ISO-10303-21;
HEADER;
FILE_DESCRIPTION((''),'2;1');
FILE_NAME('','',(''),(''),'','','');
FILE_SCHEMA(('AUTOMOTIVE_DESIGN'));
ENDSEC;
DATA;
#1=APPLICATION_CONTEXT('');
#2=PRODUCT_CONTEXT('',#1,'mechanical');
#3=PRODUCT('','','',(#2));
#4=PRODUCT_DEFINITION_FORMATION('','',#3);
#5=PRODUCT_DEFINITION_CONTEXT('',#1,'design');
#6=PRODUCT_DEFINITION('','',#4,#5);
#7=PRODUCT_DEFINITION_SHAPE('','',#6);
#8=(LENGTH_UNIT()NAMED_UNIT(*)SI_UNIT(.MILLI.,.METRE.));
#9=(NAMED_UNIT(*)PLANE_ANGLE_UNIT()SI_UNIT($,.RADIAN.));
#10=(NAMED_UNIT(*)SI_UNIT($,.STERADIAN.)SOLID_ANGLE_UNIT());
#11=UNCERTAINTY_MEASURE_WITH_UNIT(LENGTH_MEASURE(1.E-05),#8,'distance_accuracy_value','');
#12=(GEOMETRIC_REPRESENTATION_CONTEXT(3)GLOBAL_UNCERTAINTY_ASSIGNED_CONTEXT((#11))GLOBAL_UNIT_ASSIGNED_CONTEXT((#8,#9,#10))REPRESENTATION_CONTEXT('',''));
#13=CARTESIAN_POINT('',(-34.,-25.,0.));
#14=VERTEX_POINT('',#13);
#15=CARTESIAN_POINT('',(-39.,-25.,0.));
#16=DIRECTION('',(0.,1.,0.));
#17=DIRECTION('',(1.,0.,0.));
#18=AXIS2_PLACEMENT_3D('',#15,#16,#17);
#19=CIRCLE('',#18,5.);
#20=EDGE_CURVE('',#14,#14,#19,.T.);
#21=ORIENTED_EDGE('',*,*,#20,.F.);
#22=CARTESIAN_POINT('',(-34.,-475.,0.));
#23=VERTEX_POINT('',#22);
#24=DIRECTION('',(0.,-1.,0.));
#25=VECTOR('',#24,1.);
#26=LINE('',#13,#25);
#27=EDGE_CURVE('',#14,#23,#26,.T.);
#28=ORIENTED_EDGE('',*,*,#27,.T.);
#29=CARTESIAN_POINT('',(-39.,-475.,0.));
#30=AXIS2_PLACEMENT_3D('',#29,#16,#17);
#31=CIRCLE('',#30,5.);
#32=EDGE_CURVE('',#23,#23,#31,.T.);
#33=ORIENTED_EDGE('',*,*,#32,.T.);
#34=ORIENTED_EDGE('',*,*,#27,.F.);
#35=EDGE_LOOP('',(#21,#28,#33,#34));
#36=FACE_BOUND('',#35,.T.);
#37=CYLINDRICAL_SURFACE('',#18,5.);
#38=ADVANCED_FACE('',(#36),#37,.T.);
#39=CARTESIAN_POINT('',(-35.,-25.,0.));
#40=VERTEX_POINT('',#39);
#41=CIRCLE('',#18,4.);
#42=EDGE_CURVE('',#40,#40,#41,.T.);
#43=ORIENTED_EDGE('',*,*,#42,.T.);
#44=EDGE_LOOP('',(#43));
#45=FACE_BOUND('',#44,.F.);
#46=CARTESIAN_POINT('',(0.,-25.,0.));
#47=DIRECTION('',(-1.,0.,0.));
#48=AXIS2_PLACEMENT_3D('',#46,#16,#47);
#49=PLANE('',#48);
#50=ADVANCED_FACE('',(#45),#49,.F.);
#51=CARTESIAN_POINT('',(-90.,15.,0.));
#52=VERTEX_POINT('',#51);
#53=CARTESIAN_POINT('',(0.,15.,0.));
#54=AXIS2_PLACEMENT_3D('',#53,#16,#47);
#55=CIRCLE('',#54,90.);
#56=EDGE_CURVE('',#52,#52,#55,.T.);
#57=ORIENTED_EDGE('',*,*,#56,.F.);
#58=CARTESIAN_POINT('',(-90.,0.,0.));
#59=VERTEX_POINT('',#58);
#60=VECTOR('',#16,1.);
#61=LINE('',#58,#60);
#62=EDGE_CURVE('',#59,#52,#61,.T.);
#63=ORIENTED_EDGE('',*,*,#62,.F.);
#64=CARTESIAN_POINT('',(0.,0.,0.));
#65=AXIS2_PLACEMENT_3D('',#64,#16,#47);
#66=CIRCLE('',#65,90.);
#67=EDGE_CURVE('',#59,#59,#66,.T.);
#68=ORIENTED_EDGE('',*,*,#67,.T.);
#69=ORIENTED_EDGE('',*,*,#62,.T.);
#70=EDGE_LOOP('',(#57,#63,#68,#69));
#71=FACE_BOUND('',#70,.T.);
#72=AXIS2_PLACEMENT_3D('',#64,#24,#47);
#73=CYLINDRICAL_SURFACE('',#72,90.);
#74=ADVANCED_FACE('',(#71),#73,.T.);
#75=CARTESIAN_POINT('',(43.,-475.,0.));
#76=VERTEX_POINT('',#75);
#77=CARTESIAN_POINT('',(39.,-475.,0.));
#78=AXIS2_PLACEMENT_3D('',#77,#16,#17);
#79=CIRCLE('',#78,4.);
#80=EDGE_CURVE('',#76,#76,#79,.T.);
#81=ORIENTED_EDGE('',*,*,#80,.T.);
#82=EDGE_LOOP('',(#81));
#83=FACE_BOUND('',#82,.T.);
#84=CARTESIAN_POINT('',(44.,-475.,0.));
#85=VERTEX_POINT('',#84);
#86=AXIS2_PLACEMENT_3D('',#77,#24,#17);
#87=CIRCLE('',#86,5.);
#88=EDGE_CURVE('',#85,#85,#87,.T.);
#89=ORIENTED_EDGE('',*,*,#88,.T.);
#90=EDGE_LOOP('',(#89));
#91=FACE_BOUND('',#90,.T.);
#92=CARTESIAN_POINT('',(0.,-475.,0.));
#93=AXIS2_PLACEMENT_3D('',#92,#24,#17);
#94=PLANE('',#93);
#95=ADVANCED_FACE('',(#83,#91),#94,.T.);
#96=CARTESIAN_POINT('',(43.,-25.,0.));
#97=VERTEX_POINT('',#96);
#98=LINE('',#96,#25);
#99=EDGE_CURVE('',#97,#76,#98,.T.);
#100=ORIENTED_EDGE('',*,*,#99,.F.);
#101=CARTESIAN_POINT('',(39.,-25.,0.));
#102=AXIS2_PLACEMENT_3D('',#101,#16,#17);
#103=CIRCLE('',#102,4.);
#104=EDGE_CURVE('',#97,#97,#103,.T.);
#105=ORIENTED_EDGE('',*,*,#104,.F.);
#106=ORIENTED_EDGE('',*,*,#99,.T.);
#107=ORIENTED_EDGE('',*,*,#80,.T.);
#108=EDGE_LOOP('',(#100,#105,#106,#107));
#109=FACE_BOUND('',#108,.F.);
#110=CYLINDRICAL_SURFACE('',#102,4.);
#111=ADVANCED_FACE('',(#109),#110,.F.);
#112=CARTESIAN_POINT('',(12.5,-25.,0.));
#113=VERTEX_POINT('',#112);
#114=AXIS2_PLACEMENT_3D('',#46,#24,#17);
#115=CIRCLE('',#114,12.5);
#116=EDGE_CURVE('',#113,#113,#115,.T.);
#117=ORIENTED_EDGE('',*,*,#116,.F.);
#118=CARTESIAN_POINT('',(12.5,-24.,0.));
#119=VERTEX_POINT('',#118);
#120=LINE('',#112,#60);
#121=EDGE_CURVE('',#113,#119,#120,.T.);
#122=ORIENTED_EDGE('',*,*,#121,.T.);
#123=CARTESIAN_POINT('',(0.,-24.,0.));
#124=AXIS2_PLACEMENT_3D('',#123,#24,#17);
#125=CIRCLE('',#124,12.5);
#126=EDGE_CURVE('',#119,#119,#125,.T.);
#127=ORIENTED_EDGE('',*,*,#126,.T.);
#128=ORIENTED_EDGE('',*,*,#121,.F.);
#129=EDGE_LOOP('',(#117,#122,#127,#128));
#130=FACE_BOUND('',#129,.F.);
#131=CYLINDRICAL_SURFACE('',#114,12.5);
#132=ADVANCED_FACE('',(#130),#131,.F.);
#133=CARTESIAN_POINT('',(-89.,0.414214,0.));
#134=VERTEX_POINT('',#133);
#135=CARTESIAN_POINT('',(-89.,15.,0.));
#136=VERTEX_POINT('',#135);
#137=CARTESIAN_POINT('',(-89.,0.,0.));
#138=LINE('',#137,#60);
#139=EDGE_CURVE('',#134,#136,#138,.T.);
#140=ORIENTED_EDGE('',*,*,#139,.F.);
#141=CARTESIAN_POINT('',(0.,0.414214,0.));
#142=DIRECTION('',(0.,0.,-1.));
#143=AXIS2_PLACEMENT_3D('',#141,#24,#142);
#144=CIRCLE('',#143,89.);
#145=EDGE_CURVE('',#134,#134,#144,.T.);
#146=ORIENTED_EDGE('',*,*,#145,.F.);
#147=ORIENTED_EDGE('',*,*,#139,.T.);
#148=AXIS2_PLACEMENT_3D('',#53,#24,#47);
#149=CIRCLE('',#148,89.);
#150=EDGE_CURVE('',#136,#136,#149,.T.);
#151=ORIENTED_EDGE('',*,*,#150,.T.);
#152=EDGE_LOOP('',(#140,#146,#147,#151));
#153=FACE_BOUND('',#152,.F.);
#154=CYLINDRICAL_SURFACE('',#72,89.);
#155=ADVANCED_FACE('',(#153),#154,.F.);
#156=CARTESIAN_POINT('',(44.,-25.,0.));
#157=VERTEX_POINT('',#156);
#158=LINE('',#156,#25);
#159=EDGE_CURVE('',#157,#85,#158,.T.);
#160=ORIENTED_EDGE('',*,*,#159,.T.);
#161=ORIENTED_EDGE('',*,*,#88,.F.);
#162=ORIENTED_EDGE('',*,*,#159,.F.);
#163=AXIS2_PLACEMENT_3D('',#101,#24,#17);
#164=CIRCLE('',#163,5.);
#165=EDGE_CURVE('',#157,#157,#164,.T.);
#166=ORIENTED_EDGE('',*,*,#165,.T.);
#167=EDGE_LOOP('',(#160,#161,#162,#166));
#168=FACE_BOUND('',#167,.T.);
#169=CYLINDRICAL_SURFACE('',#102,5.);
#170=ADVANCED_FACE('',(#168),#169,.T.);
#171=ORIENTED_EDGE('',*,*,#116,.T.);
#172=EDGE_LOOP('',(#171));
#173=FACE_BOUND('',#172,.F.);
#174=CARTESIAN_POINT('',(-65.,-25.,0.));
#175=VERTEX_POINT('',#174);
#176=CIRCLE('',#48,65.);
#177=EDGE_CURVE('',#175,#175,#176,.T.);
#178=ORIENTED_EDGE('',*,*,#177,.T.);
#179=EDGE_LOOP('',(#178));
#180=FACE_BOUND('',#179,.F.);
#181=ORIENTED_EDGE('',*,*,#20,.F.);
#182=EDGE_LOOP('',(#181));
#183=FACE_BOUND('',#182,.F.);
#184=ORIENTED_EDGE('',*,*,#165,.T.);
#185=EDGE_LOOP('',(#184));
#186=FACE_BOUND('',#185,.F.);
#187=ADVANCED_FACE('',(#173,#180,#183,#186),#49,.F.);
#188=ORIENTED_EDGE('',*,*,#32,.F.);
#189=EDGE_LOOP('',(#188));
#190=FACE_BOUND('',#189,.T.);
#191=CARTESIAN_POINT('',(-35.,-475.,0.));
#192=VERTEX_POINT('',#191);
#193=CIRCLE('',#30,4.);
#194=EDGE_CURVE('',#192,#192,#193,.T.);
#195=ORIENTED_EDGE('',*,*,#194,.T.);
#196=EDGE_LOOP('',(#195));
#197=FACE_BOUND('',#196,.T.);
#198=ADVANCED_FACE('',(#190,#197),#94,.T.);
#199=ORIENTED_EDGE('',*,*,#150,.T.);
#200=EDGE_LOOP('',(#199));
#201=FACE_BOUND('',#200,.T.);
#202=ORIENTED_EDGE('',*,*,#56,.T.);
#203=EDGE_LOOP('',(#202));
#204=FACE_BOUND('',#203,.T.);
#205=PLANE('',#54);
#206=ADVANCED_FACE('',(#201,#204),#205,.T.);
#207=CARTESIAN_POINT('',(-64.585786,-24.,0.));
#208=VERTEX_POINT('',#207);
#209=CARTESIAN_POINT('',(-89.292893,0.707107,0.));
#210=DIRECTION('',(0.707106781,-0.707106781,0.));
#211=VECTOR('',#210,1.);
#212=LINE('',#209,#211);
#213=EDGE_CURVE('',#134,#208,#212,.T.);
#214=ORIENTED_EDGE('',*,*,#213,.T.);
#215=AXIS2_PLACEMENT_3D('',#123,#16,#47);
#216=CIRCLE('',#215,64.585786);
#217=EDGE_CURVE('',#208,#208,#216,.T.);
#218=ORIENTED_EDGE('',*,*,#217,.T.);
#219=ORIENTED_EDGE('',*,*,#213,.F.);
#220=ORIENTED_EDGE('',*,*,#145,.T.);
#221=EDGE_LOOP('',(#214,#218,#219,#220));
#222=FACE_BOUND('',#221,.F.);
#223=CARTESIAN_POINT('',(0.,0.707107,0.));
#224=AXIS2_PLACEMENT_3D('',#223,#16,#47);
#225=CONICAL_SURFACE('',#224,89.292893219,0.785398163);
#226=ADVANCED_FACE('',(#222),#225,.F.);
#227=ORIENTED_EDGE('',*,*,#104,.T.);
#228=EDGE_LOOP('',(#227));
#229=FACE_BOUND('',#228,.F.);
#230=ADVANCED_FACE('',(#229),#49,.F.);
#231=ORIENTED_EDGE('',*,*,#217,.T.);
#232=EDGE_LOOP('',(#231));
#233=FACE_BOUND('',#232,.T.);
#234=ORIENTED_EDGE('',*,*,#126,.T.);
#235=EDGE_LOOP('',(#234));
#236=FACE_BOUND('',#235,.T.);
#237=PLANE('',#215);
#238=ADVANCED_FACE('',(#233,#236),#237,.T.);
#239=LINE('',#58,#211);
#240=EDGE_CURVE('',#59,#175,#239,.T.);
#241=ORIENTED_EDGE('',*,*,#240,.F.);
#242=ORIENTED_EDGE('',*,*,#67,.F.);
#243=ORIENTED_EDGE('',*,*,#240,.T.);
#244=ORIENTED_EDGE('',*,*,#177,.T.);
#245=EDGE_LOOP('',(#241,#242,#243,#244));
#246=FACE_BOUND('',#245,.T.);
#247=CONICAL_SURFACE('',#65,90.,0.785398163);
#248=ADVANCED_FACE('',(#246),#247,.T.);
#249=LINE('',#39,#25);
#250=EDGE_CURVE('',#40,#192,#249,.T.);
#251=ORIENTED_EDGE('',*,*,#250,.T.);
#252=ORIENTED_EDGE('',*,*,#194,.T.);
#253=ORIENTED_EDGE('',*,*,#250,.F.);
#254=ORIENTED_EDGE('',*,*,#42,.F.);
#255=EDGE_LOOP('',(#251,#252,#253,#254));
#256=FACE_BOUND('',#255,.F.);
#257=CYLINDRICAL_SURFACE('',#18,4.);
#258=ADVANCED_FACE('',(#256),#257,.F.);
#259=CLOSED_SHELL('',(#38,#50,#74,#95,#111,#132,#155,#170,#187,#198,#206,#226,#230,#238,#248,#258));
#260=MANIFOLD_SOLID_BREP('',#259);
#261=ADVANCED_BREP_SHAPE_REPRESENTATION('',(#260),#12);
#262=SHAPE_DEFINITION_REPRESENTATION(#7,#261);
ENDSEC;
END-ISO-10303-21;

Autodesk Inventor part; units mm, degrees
ref_plane "YZ Plane" through (0, 0, 0) normal (1, 0, 0) x (0, 1, 0)
ref_plane "XZ Plane" through (0, 0, 0) normal (0, 1, 0) x (-1, 0, 0)
ref_plane "XY Plane" through (0, 0, 0) normal (0, 0, 1) x (1, 0, 0)
sketch "Boceto1" plane through (0, 0, 0) normal (0, 1, 0) x (-1, 0, 0)
  circle A0 centre (0, 0) radius 90
  dimension "d0" = 180
extrude "Extrusión1" add sketch "Boceto1" along normal blind 15
extrude "Extrusión2" add sketch "Boceto1" against normal blind 25 draft -45
shell "Vaciado1" thickness 1 removed faces 1 at (19.6237, 15, 24.7178)
sketch "Boceto2" plane through (0, -25, 0) normal (0, -1, 0) x (1, 0, 0)
  circle A0 centre (0, 0) radius 12.5
  dimension "d6" = 25
extrude "Extrusión3" cut sketch "Boceto2" against normal blind 25
sketch "Boceto3" plane through (0, -25, 0) normal (0, -1, 0) x (1, 0, 0)
  circle A0 centre (0, 0) radius 12.5 projected
  circle A1 centre (0, 0) radius 45
  circle A2 centre (0, 0) radius 44
  line L0 (44, 0) -> (41.5, 0)
  circle A3 centre (41.5, 0) radius 2.5
  line L1 (-44, 0) -> (-41.5, 0)
  circle A4 centre (-41.5, 0) radius 2.5
  circle A5 centre (0, 41.5) radius 2.5
  circle A6 centre (-41.5, 0) radius 2.5
  circle A7 centre (0, -41.5) radius 2.5
  line L2 (44, 0) -> (39, 0)
  circle A8 centre (39, 0) radius 5
  circle A9 centre (-39, 0) radius 5
  point P0 (0, 44)
  point P1 (-44, 0)
  point P2 (0, -44)
  dimension "d9" = 90
  dimension "d10" = 88
  dimension "d11" = 2.5
  dimension "d12" = 2.5
  dimension "d13" = 5
  dimension "d16" = 360
extrude "Extrusión4" add sketch "Boceto3" along normal blind 450 contours A4 | A9 | A3 L2 L0 | L0 L2 A3 | A8
shell "Vaciado2" thickness 1 removed faces 2 at (-39.591, -475, 0.7606) at (39.8768, -475, -0.3989)
properties part number "base"
